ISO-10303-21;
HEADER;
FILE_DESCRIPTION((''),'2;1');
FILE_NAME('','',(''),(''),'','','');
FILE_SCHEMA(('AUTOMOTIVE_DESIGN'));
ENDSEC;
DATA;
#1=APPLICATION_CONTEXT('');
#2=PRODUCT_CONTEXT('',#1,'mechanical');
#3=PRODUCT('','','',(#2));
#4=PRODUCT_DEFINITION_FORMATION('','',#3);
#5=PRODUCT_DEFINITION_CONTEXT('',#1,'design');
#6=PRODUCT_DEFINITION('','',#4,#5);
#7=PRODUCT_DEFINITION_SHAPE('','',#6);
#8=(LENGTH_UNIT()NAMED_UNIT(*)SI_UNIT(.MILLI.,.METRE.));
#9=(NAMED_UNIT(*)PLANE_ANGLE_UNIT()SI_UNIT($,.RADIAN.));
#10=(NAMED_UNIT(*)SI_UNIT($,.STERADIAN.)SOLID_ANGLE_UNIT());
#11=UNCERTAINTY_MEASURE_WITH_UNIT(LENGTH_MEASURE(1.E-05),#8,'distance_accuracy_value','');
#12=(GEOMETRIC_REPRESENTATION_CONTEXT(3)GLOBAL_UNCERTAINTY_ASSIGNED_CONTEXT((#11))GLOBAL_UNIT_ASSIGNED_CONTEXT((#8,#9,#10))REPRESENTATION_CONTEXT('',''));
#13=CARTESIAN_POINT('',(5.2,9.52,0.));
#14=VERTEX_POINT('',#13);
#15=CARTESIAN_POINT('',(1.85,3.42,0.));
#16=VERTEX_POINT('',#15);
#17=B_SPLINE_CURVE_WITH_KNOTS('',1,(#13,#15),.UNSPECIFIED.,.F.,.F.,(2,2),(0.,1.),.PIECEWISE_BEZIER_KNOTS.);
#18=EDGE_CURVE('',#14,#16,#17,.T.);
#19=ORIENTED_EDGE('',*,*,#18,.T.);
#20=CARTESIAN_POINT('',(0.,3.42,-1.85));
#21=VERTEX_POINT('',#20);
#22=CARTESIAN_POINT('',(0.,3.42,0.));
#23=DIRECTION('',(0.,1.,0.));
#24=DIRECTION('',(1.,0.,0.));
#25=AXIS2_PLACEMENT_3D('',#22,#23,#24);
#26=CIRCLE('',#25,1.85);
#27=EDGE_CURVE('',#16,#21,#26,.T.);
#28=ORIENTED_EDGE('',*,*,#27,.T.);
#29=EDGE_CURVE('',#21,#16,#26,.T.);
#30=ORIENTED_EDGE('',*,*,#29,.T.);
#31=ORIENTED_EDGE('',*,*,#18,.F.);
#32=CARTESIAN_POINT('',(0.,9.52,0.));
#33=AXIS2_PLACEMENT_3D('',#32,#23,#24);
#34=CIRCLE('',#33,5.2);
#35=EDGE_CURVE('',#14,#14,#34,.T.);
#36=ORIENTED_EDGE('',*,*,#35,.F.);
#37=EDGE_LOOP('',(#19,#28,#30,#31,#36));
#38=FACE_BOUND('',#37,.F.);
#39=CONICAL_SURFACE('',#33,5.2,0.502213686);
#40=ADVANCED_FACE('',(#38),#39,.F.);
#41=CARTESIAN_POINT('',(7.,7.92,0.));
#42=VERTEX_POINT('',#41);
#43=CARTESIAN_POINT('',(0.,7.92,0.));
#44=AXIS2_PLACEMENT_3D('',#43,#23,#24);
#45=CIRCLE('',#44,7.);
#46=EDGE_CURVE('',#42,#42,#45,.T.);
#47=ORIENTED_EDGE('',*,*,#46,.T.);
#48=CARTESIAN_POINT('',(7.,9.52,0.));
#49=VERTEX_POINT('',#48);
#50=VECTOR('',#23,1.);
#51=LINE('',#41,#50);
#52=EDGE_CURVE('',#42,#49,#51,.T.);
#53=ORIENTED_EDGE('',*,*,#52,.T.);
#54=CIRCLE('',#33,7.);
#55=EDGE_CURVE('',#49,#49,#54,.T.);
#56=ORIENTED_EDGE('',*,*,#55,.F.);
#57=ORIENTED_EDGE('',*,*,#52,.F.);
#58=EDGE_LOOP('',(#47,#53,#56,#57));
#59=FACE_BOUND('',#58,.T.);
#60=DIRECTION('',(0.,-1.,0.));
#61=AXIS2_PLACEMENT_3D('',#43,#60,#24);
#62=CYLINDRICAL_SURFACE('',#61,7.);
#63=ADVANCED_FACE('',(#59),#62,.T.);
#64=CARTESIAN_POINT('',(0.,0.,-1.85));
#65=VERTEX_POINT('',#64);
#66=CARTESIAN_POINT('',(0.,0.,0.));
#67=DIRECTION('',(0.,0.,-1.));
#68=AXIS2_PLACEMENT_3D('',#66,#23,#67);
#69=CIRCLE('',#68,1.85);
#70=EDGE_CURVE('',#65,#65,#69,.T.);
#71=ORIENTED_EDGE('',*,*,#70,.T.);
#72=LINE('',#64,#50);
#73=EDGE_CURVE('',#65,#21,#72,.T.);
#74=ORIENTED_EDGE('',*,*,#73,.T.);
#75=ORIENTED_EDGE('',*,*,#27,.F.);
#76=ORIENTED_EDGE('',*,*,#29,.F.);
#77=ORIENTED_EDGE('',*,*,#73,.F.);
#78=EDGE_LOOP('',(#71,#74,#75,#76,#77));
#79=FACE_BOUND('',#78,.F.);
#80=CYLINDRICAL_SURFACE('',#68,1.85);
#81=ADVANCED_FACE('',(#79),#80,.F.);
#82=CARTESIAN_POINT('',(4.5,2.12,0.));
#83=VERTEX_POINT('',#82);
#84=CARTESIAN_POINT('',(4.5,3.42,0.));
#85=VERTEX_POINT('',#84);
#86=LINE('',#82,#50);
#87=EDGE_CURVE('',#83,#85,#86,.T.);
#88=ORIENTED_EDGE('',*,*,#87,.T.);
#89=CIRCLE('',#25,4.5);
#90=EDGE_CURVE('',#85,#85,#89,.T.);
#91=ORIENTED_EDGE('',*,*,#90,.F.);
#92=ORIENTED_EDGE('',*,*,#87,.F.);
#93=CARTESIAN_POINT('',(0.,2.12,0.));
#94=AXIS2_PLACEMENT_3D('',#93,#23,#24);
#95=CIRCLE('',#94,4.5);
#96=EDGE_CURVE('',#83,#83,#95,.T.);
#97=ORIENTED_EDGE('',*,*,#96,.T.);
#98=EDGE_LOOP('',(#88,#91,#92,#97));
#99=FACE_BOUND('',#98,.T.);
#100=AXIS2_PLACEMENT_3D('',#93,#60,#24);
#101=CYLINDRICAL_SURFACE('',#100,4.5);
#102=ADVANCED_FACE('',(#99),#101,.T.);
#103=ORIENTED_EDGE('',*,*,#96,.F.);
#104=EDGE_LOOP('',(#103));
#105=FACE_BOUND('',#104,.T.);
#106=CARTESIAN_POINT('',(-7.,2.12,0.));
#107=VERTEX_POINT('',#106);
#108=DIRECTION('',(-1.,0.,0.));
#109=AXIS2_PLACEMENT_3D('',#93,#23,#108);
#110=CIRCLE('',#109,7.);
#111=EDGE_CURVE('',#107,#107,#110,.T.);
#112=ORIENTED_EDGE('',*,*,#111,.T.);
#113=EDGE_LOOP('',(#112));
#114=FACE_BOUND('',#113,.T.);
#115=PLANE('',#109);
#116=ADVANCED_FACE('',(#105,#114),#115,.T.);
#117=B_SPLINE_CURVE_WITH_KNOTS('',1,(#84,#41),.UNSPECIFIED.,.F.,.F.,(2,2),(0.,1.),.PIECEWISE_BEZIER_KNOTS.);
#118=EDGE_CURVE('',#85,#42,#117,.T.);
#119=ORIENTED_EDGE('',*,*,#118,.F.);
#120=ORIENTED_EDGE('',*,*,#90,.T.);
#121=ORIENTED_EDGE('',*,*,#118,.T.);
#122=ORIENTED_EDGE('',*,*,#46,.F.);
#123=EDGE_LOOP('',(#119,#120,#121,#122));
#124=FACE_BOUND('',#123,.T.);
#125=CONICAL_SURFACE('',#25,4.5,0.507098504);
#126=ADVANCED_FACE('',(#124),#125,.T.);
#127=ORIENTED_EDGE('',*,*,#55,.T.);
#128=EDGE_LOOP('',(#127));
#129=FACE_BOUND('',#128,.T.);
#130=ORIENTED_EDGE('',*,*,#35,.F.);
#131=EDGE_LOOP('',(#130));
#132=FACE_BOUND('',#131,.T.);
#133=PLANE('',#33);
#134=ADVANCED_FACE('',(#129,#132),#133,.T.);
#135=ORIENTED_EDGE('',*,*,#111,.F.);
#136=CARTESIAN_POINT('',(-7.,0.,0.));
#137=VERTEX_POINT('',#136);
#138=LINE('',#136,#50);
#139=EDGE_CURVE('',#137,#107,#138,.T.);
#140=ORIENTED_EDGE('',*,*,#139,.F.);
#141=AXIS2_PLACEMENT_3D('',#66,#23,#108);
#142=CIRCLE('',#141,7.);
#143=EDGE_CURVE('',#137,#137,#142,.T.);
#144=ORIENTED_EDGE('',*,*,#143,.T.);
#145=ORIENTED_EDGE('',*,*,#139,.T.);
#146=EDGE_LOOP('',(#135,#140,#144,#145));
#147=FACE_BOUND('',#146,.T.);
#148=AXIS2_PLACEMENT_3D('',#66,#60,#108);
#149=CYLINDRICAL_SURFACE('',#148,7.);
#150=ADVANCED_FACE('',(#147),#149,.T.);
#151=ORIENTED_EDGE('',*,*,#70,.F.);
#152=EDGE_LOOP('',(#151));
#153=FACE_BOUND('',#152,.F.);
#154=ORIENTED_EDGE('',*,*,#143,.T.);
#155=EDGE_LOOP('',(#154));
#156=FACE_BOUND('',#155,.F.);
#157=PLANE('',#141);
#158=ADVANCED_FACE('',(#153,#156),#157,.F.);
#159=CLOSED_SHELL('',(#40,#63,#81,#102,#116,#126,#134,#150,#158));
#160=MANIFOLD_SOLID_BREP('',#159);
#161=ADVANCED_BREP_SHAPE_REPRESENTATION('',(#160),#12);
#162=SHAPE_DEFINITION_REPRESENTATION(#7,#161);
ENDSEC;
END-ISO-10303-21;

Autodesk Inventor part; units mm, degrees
ref_plane "YZ Plane" through (0, 0, 0) normal (1, 0, 0) x (0, 1, 0)
sketch "Sketch1" plane through (0, 0, 0) normal (0, 1, 0) x (-1, 0, 0)
  circle A0 centre (0, 0) radius 7
  dimension "d0" = 14
extrude "Extrusion1" add sketch "Sketch1" along normal blind 2.12
sketch "Sketch3" plane through (0, 2.12, 0) normal (0, 1, 0) x (1, 0, 0)
  circle A0 centre (0, 0) radius 4.5
  dimension "d4" = 9
extrude "Extrusion2" add sketch "Sketch3" along normal blind 1.3
ref_plane "Work Plane2" through (0, 7.92, 0) normal (0, 1, 0) x (1, 0, 0)
sketch "Sketch5" plane through (0, 7.92, 0) normal (0, 1, 0) x (1, 0, 0)
  circle A0 centre (0, 0) radius 7
  dimension "d8" = 14
loft "Loft1" add profiles "Sketch5" section 1 edges at (-4.5, 3.42, 0)
sketch "Sketch7" plane through (0, 7.92, 0) normal (0, 1, 0) x (1, 0, 0)
  circle A0 centre (0, 0) radius 7
extrude "Extrusion3" add sketch "Sketch7" along normal blind 1.6
sketch "Sketch8" plane through (0, 9.52, 0) normal (0, 1, 0) x (1, 0, 0)
  circle A0 centre (0, 0) radius 5.2
  dimension "d15" = 10.4
ref_plane "Work Plane3" through (0, 3.42, 0) normal (0, 1, 0) x (1, 0, 0)
sketch "Sketch10" plane through (0, 3.42, 0) normal (0, 1, 0) x (1, 0, 0)
  circle A0 centre (0, 0) radius 1.85
  dimension "d22" = 3.7
loft "Loft3" cut profiles "Sketch8", "Sketch10"
hole "Hole1" at (0, 0, 0) direction (0, 1, 0) diameter 3.7 end through all
equation "\"d34\" = Thickness"
equation "\"BendRadius\" = Thickness"
equation "\"BendReliefWidth\" = Thickness"
equation "\"BendReliefDepth\" = 0.5 * Thickness"
equation "\"CornerReliefSize\" = 4 * Thickness"
equation "\"MinimumRemnant\" = 2 * Thickness"
equation "\"TransitionRadius\" = BendRadius"
equation "\"JacobiRadiusSize\" = Thickness"
equation "\"GapSize\" = Thickness"
equation "\"Thickness\" = 0.5"
